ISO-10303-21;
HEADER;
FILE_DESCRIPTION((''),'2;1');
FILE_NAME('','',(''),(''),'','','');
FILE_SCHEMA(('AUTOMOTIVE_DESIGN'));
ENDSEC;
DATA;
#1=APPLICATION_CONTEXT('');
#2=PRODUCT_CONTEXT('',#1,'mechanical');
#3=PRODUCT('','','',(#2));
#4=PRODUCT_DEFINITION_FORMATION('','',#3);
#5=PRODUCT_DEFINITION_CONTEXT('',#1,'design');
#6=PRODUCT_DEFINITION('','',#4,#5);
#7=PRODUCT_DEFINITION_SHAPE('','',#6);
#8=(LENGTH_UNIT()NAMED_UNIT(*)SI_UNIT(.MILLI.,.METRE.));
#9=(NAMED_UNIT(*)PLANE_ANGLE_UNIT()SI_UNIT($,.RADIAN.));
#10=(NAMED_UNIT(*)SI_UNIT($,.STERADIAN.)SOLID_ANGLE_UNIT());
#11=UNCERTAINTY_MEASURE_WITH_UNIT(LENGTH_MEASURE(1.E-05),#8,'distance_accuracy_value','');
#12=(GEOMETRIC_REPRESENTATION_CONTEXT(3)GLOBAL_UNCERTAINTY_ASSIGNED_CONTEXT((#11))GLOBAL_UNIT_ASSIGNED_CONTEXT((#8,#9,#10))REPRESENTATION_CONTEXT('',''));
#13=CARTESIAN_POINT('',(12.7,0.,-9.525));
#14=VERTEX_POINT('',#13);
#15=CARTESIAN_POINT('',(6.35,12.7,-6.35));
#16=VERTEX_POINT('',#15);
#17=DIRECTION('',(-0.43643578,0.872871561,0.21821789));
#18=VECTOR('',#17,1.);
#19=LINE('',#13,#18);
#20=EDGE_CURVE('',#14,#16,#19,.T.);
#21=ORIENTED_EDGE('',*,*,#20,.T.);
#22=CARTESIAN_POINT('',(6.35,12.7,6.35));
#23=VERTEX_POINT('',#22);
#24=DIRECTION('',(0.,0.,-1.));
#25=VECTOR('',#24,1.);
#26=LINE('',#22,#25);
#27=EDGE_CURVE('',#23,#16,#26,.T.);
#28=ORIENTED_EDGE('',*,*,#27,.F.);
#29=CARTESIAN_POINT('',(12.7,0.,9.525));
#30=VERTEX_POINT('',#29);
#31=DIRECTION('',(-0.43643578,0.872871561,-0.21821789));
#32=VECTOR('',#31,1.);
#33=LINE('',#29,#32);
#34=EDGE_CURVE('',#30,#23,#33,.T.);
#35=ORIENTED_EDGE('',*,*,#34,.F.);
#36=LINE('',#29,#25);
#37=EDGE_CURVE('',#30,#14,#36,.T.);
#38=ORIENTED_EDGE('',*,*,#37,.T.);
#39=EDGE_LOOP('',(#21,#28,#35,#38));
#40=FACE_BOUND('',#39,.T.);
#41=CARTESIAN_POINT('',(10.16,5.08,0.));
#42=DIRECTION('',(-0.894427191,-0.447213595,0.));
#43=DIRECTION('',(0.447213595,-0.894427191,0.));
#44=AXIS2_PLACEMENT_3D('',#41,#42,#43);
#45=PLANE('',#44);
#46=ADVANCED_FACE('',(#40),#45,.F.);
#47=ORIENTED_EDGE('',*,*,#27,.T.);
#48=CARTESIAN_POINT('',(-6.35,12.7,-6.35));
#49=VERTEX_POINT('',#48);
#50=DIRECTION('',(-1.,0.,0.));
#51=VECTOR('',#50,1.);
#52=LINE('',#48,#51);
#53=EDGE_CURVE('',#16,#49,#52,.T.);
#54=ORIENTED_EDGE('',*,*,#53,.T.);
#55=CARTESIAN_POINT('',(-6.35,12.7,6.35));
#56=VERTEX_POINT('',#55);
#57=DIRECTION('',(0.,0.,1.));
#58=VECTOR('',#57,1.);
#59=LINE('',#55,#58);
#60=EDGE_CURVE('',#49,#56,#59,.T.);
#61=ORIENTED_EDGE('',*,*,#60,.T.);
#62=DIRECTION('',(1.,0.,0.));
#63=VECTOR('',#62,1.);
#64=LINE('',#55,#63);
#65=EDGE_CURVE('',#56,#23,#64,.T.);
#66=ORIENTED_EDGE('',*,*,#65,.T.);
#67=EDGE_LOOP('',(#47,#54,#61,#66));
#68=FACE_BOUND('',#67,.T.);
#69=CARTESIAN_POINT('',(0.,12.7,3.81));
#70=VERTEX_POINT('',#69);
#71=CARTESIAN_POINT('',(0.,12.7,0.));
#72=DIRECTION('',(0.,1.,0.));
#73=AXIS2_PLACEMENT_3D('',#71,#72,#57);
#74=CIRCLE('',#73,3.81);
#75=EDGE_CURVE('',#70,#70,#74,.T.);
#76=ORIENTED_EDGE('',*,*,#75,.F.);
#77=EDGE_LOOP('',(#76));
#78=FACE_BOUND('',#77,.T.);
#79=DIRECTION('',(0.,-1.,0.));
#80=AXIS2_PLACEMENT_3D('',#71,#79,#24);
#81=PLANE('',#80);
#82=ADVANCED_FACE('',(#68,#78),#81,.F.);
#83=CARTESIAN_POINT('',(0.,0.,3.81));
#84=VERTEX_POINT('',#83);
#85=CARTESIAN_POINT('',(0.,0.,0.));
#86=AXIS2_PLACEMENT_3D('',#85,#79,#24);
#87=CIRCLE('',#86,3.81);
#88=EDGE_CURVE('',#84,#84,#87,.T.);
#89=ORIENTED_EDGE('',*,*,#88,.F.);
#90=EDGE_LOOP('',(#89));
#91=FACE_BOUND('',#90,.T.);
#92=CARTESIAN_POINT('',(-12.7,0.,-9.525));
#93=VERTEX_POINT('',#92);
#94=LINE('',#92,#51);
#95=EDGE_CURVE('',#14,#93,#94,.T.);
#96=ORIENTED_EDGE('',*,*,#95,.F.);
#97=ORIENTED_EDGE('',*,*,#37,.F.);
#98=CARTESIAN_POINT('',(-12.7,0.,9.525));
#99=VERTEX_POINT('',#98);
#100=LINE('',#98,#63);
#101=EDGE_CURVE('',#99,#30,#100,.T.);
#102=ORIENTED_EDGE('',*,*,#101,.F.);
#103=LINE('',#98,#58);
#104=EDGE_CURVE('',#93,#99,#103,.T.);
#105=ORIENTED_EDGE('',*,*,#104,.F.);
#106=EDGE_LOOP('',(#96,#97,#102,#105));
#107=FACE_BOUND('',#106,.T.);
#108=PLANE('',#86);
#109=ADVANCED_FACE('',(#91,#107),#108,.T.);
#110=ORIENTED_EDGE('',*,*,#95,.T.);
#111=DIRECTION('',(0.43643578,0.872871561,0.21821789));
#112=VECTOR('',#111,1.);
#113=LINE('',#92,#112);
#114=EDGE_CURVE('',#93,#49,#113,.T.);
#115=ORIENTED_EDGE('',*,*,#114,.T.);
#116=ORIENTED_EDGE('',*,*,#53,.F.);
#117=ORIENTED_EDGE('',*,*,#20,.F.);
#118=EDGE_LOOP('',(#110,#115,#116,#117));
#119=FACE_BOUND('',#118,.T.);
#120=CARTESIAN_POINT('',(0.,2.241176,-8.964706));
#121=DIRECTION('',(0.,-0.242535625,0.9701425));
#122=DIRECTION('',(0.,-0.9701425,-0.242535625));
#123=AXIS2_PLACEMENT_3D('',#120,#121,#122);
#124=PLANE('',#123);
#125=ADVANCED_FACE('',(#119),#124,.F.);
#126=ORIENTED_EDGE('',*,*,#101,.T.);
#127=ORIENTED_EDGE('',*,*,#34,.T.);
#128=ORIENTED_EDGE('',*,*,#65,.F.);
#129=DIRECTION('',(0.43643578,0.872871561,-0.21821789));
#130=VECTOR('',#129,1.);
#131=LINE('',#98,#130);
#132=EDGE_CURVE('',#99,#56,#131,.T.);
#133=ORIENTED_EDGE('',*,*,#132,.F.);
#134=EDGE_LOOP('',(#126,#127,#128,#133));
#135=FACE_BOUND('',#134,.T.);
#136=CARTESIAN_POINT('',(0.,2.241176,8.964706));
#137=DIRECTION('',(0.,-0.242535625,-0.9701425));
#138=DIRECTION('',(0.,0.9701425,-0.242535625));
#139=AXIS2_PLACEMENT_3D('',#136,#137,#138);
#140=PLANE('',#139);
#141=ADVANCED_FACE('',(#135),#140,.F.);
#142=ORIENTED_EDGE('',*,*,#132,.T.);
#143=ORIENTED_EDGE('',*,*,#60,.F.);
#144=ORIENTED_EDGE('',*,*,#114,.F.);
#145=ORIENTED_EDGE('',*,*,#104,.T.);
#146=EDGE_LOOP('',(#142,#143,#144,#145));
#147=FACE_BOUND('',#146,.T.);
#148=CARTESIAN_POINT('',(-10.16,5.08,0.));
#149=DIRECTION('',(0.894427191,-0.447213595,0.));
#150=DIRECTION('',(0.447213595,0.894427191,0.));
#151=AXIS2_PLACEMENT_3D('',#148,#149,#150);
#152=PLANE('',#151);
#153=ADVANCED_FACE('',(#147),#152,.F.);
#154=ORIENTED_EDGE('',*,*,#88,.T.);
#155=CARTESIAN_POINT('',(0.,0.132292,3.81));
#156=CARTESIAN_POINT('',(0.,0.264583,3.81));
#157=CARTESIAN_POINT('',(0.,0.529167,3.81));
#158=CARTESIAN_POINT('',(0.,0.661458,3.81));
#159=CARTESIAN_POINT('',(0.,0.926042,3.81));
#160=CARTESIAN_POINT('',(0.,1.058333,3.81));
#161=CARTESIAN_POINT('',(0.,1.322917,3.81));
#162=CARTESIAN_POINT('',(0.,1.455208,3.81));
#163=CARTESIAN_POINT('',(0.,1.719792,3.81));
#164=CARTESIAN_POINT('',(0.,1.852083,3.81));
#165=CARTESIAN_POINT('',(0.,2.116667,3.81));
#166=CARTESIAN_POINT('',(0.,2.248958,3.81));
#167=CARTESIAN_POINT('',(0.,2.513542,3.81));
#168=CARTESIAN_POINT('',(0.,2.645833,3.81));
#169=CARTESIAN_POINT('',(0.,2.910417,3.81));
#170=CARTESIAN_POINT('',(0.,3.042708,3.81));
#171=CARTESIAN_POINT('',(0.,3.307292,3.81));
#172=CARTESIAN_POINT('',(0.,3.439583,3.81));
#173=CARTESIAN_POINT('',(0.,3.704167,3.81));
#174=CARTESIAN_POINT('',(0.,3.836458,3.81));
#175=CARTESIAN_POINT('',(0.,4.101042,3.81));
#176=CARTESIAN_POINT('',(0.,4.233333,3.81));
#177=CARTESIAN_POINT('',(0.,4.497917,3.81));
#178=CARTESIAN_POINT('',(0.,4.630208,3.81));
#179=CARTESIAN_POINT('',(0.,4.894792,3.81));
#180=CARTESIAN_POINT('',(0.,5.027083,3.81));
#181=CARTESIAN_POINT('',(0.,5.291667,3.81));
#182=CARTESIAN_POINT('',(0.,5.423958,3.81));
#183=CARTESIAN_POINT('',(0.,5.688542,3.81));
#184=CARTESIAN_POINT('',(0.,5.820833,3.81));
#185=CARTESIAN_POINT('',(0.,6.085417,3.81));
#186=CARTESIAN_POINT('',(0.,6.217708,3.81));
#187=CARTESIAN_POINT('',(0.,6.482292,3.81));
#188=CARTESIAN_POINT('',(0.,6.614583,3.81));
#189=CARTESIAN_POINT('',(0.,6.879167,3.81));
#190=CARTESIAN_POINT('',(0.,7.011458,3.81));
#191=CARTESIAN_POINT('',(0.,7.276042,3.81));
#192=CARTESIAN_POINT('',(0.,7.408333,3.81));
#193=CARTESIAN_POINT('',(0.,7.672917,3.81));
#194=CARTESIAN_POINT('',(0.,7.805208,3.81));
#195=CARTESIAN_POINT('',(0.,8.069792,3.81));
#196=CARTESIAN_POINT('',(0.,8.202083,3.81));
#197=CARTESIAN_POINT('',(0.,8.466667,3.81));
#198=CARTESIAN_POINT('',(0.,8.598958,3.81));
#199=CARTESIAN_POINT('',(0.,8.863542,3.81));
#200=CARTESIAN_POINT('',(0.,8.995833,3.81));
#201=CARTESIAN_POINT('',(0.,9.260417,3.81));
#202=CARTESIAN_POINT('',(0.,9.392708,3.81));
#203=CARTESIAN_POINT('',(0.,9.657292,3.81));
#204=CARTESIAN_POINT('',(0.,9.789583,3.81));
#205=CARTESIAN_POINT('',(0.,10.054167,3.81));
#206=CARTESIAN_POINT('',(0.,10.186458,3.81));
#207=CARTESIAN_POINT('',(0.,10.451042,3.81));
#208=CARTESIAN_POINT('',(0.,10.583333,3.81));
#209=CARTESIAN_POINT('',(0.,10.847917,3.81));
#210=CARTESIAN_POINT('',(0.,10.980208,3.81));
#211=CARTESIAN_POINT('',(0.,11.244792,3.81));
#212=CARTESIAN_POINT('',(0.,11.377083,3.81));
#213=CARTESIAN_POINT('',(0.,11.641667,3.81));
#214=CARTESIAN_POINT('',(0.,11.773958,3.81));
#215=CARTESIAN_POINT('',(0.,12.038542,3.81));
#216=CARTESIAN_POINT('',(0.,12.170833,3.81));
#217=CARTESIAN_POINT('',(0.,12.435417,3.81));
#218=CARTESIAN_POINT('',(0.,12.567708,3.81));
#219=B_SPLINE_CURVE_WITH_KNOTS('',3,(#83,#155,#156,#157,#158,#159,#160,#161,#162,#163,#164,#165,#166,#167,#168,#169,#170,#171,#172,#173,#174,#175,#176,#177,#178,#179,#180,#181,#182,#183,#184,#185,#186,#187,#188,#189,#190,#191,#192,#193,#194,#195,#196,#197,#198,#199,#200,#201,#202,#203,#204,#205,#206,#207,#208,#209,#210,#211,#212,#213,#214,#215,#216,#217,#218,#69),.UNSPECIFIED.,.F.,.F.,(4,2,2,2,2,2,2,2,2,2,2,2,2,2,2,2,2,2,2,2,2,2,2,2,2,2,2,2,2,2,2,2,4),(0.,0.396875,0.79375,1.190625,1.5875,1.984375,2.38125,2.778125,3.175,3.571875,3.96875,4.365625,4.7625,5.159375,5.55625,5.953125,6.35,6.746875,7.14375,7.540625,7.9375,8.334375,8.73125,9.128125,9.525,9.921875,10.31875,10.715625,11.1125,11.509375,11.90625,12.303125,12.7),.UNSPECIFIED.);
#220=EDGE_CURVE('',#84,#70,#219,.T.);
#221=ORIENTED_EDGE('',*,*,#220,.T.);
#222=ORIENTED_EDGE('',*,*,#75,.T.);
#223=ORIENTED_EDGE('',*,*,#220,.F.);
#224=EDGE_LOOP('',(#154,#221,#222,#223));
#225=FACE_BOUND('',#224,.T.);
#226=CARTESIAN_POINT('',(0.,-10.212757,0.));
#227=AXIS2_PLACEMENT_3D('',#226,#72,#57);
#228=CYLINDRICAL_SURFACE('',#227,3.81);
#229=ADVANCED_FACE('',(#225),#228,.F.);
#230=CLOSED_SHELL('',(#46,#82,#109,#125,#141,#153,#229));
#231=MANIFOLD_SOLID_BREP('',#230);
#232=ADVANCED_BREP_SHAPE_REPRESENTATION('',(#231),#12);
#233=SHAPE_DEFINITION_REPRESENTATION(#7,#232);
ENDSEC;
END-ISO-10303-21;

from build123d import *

# Parameters (mm, degrees)
HOLE_FOR_HOOK_START     = -12.7
HOLE_FOR_HOOK_OUTLINE_R = 3.81
HOLE_FOR_HOOK_DEPTH     = 12.7


# Read off the part's stored shape, not the designer's step: Hole-For-Hook
with BuildPart() as part:
    # Sketch-Rectangle → Loft1 section 0
    with BuildSketch(Plane(origin=(0, 0, 0), x_dir=(1, 0, 0), z_dir=(0, 1, 0))):
        with BuildLine():
            Line((-12.7, -9.525), (12.7, -9.525))
            Line((12.7, -9.525), (12.7, 9.525))
            Line((12.7, 9.525), (-12.7, 9.525))
            Line((-12.7, 9.525), (-12.7, -9.525))
        make_face()
    # Sketch-Square → Loft1 section 1
    with BuildSketch(Plane(origin=(0, 12.7, 0), x_dir=(1, 0, 0), z_dir=(0, 1, 0))):
        with BuildLine():
            Line((-6.35, -6.35), (6.35, -6.35))
            Line((6.35, -6.35), (6.35, 6.35))
            Line((6.35, 6.35), (-6.35, 6.35))
            Line((-6.35, 6.35), (-6.35, -6.35))
        make_face()
    loft()

    # Hole-For-Hook outline → Hole-For-Hook (cut)
    with BuildSketch(Plane(origin=(0, 12.7, 0), x_dir=(1, 0, 0), z_dir=(0, 1, 0)).offset(HOLE_FOR_HOOK_START)):
        Circle(HOLE_FOR_HOOK_OUTLINE_R)
    extrude(amount=HOLE_FOR_HOOK_DEPTH, mode=Mode.SUBTRACT)


solid = part.part
